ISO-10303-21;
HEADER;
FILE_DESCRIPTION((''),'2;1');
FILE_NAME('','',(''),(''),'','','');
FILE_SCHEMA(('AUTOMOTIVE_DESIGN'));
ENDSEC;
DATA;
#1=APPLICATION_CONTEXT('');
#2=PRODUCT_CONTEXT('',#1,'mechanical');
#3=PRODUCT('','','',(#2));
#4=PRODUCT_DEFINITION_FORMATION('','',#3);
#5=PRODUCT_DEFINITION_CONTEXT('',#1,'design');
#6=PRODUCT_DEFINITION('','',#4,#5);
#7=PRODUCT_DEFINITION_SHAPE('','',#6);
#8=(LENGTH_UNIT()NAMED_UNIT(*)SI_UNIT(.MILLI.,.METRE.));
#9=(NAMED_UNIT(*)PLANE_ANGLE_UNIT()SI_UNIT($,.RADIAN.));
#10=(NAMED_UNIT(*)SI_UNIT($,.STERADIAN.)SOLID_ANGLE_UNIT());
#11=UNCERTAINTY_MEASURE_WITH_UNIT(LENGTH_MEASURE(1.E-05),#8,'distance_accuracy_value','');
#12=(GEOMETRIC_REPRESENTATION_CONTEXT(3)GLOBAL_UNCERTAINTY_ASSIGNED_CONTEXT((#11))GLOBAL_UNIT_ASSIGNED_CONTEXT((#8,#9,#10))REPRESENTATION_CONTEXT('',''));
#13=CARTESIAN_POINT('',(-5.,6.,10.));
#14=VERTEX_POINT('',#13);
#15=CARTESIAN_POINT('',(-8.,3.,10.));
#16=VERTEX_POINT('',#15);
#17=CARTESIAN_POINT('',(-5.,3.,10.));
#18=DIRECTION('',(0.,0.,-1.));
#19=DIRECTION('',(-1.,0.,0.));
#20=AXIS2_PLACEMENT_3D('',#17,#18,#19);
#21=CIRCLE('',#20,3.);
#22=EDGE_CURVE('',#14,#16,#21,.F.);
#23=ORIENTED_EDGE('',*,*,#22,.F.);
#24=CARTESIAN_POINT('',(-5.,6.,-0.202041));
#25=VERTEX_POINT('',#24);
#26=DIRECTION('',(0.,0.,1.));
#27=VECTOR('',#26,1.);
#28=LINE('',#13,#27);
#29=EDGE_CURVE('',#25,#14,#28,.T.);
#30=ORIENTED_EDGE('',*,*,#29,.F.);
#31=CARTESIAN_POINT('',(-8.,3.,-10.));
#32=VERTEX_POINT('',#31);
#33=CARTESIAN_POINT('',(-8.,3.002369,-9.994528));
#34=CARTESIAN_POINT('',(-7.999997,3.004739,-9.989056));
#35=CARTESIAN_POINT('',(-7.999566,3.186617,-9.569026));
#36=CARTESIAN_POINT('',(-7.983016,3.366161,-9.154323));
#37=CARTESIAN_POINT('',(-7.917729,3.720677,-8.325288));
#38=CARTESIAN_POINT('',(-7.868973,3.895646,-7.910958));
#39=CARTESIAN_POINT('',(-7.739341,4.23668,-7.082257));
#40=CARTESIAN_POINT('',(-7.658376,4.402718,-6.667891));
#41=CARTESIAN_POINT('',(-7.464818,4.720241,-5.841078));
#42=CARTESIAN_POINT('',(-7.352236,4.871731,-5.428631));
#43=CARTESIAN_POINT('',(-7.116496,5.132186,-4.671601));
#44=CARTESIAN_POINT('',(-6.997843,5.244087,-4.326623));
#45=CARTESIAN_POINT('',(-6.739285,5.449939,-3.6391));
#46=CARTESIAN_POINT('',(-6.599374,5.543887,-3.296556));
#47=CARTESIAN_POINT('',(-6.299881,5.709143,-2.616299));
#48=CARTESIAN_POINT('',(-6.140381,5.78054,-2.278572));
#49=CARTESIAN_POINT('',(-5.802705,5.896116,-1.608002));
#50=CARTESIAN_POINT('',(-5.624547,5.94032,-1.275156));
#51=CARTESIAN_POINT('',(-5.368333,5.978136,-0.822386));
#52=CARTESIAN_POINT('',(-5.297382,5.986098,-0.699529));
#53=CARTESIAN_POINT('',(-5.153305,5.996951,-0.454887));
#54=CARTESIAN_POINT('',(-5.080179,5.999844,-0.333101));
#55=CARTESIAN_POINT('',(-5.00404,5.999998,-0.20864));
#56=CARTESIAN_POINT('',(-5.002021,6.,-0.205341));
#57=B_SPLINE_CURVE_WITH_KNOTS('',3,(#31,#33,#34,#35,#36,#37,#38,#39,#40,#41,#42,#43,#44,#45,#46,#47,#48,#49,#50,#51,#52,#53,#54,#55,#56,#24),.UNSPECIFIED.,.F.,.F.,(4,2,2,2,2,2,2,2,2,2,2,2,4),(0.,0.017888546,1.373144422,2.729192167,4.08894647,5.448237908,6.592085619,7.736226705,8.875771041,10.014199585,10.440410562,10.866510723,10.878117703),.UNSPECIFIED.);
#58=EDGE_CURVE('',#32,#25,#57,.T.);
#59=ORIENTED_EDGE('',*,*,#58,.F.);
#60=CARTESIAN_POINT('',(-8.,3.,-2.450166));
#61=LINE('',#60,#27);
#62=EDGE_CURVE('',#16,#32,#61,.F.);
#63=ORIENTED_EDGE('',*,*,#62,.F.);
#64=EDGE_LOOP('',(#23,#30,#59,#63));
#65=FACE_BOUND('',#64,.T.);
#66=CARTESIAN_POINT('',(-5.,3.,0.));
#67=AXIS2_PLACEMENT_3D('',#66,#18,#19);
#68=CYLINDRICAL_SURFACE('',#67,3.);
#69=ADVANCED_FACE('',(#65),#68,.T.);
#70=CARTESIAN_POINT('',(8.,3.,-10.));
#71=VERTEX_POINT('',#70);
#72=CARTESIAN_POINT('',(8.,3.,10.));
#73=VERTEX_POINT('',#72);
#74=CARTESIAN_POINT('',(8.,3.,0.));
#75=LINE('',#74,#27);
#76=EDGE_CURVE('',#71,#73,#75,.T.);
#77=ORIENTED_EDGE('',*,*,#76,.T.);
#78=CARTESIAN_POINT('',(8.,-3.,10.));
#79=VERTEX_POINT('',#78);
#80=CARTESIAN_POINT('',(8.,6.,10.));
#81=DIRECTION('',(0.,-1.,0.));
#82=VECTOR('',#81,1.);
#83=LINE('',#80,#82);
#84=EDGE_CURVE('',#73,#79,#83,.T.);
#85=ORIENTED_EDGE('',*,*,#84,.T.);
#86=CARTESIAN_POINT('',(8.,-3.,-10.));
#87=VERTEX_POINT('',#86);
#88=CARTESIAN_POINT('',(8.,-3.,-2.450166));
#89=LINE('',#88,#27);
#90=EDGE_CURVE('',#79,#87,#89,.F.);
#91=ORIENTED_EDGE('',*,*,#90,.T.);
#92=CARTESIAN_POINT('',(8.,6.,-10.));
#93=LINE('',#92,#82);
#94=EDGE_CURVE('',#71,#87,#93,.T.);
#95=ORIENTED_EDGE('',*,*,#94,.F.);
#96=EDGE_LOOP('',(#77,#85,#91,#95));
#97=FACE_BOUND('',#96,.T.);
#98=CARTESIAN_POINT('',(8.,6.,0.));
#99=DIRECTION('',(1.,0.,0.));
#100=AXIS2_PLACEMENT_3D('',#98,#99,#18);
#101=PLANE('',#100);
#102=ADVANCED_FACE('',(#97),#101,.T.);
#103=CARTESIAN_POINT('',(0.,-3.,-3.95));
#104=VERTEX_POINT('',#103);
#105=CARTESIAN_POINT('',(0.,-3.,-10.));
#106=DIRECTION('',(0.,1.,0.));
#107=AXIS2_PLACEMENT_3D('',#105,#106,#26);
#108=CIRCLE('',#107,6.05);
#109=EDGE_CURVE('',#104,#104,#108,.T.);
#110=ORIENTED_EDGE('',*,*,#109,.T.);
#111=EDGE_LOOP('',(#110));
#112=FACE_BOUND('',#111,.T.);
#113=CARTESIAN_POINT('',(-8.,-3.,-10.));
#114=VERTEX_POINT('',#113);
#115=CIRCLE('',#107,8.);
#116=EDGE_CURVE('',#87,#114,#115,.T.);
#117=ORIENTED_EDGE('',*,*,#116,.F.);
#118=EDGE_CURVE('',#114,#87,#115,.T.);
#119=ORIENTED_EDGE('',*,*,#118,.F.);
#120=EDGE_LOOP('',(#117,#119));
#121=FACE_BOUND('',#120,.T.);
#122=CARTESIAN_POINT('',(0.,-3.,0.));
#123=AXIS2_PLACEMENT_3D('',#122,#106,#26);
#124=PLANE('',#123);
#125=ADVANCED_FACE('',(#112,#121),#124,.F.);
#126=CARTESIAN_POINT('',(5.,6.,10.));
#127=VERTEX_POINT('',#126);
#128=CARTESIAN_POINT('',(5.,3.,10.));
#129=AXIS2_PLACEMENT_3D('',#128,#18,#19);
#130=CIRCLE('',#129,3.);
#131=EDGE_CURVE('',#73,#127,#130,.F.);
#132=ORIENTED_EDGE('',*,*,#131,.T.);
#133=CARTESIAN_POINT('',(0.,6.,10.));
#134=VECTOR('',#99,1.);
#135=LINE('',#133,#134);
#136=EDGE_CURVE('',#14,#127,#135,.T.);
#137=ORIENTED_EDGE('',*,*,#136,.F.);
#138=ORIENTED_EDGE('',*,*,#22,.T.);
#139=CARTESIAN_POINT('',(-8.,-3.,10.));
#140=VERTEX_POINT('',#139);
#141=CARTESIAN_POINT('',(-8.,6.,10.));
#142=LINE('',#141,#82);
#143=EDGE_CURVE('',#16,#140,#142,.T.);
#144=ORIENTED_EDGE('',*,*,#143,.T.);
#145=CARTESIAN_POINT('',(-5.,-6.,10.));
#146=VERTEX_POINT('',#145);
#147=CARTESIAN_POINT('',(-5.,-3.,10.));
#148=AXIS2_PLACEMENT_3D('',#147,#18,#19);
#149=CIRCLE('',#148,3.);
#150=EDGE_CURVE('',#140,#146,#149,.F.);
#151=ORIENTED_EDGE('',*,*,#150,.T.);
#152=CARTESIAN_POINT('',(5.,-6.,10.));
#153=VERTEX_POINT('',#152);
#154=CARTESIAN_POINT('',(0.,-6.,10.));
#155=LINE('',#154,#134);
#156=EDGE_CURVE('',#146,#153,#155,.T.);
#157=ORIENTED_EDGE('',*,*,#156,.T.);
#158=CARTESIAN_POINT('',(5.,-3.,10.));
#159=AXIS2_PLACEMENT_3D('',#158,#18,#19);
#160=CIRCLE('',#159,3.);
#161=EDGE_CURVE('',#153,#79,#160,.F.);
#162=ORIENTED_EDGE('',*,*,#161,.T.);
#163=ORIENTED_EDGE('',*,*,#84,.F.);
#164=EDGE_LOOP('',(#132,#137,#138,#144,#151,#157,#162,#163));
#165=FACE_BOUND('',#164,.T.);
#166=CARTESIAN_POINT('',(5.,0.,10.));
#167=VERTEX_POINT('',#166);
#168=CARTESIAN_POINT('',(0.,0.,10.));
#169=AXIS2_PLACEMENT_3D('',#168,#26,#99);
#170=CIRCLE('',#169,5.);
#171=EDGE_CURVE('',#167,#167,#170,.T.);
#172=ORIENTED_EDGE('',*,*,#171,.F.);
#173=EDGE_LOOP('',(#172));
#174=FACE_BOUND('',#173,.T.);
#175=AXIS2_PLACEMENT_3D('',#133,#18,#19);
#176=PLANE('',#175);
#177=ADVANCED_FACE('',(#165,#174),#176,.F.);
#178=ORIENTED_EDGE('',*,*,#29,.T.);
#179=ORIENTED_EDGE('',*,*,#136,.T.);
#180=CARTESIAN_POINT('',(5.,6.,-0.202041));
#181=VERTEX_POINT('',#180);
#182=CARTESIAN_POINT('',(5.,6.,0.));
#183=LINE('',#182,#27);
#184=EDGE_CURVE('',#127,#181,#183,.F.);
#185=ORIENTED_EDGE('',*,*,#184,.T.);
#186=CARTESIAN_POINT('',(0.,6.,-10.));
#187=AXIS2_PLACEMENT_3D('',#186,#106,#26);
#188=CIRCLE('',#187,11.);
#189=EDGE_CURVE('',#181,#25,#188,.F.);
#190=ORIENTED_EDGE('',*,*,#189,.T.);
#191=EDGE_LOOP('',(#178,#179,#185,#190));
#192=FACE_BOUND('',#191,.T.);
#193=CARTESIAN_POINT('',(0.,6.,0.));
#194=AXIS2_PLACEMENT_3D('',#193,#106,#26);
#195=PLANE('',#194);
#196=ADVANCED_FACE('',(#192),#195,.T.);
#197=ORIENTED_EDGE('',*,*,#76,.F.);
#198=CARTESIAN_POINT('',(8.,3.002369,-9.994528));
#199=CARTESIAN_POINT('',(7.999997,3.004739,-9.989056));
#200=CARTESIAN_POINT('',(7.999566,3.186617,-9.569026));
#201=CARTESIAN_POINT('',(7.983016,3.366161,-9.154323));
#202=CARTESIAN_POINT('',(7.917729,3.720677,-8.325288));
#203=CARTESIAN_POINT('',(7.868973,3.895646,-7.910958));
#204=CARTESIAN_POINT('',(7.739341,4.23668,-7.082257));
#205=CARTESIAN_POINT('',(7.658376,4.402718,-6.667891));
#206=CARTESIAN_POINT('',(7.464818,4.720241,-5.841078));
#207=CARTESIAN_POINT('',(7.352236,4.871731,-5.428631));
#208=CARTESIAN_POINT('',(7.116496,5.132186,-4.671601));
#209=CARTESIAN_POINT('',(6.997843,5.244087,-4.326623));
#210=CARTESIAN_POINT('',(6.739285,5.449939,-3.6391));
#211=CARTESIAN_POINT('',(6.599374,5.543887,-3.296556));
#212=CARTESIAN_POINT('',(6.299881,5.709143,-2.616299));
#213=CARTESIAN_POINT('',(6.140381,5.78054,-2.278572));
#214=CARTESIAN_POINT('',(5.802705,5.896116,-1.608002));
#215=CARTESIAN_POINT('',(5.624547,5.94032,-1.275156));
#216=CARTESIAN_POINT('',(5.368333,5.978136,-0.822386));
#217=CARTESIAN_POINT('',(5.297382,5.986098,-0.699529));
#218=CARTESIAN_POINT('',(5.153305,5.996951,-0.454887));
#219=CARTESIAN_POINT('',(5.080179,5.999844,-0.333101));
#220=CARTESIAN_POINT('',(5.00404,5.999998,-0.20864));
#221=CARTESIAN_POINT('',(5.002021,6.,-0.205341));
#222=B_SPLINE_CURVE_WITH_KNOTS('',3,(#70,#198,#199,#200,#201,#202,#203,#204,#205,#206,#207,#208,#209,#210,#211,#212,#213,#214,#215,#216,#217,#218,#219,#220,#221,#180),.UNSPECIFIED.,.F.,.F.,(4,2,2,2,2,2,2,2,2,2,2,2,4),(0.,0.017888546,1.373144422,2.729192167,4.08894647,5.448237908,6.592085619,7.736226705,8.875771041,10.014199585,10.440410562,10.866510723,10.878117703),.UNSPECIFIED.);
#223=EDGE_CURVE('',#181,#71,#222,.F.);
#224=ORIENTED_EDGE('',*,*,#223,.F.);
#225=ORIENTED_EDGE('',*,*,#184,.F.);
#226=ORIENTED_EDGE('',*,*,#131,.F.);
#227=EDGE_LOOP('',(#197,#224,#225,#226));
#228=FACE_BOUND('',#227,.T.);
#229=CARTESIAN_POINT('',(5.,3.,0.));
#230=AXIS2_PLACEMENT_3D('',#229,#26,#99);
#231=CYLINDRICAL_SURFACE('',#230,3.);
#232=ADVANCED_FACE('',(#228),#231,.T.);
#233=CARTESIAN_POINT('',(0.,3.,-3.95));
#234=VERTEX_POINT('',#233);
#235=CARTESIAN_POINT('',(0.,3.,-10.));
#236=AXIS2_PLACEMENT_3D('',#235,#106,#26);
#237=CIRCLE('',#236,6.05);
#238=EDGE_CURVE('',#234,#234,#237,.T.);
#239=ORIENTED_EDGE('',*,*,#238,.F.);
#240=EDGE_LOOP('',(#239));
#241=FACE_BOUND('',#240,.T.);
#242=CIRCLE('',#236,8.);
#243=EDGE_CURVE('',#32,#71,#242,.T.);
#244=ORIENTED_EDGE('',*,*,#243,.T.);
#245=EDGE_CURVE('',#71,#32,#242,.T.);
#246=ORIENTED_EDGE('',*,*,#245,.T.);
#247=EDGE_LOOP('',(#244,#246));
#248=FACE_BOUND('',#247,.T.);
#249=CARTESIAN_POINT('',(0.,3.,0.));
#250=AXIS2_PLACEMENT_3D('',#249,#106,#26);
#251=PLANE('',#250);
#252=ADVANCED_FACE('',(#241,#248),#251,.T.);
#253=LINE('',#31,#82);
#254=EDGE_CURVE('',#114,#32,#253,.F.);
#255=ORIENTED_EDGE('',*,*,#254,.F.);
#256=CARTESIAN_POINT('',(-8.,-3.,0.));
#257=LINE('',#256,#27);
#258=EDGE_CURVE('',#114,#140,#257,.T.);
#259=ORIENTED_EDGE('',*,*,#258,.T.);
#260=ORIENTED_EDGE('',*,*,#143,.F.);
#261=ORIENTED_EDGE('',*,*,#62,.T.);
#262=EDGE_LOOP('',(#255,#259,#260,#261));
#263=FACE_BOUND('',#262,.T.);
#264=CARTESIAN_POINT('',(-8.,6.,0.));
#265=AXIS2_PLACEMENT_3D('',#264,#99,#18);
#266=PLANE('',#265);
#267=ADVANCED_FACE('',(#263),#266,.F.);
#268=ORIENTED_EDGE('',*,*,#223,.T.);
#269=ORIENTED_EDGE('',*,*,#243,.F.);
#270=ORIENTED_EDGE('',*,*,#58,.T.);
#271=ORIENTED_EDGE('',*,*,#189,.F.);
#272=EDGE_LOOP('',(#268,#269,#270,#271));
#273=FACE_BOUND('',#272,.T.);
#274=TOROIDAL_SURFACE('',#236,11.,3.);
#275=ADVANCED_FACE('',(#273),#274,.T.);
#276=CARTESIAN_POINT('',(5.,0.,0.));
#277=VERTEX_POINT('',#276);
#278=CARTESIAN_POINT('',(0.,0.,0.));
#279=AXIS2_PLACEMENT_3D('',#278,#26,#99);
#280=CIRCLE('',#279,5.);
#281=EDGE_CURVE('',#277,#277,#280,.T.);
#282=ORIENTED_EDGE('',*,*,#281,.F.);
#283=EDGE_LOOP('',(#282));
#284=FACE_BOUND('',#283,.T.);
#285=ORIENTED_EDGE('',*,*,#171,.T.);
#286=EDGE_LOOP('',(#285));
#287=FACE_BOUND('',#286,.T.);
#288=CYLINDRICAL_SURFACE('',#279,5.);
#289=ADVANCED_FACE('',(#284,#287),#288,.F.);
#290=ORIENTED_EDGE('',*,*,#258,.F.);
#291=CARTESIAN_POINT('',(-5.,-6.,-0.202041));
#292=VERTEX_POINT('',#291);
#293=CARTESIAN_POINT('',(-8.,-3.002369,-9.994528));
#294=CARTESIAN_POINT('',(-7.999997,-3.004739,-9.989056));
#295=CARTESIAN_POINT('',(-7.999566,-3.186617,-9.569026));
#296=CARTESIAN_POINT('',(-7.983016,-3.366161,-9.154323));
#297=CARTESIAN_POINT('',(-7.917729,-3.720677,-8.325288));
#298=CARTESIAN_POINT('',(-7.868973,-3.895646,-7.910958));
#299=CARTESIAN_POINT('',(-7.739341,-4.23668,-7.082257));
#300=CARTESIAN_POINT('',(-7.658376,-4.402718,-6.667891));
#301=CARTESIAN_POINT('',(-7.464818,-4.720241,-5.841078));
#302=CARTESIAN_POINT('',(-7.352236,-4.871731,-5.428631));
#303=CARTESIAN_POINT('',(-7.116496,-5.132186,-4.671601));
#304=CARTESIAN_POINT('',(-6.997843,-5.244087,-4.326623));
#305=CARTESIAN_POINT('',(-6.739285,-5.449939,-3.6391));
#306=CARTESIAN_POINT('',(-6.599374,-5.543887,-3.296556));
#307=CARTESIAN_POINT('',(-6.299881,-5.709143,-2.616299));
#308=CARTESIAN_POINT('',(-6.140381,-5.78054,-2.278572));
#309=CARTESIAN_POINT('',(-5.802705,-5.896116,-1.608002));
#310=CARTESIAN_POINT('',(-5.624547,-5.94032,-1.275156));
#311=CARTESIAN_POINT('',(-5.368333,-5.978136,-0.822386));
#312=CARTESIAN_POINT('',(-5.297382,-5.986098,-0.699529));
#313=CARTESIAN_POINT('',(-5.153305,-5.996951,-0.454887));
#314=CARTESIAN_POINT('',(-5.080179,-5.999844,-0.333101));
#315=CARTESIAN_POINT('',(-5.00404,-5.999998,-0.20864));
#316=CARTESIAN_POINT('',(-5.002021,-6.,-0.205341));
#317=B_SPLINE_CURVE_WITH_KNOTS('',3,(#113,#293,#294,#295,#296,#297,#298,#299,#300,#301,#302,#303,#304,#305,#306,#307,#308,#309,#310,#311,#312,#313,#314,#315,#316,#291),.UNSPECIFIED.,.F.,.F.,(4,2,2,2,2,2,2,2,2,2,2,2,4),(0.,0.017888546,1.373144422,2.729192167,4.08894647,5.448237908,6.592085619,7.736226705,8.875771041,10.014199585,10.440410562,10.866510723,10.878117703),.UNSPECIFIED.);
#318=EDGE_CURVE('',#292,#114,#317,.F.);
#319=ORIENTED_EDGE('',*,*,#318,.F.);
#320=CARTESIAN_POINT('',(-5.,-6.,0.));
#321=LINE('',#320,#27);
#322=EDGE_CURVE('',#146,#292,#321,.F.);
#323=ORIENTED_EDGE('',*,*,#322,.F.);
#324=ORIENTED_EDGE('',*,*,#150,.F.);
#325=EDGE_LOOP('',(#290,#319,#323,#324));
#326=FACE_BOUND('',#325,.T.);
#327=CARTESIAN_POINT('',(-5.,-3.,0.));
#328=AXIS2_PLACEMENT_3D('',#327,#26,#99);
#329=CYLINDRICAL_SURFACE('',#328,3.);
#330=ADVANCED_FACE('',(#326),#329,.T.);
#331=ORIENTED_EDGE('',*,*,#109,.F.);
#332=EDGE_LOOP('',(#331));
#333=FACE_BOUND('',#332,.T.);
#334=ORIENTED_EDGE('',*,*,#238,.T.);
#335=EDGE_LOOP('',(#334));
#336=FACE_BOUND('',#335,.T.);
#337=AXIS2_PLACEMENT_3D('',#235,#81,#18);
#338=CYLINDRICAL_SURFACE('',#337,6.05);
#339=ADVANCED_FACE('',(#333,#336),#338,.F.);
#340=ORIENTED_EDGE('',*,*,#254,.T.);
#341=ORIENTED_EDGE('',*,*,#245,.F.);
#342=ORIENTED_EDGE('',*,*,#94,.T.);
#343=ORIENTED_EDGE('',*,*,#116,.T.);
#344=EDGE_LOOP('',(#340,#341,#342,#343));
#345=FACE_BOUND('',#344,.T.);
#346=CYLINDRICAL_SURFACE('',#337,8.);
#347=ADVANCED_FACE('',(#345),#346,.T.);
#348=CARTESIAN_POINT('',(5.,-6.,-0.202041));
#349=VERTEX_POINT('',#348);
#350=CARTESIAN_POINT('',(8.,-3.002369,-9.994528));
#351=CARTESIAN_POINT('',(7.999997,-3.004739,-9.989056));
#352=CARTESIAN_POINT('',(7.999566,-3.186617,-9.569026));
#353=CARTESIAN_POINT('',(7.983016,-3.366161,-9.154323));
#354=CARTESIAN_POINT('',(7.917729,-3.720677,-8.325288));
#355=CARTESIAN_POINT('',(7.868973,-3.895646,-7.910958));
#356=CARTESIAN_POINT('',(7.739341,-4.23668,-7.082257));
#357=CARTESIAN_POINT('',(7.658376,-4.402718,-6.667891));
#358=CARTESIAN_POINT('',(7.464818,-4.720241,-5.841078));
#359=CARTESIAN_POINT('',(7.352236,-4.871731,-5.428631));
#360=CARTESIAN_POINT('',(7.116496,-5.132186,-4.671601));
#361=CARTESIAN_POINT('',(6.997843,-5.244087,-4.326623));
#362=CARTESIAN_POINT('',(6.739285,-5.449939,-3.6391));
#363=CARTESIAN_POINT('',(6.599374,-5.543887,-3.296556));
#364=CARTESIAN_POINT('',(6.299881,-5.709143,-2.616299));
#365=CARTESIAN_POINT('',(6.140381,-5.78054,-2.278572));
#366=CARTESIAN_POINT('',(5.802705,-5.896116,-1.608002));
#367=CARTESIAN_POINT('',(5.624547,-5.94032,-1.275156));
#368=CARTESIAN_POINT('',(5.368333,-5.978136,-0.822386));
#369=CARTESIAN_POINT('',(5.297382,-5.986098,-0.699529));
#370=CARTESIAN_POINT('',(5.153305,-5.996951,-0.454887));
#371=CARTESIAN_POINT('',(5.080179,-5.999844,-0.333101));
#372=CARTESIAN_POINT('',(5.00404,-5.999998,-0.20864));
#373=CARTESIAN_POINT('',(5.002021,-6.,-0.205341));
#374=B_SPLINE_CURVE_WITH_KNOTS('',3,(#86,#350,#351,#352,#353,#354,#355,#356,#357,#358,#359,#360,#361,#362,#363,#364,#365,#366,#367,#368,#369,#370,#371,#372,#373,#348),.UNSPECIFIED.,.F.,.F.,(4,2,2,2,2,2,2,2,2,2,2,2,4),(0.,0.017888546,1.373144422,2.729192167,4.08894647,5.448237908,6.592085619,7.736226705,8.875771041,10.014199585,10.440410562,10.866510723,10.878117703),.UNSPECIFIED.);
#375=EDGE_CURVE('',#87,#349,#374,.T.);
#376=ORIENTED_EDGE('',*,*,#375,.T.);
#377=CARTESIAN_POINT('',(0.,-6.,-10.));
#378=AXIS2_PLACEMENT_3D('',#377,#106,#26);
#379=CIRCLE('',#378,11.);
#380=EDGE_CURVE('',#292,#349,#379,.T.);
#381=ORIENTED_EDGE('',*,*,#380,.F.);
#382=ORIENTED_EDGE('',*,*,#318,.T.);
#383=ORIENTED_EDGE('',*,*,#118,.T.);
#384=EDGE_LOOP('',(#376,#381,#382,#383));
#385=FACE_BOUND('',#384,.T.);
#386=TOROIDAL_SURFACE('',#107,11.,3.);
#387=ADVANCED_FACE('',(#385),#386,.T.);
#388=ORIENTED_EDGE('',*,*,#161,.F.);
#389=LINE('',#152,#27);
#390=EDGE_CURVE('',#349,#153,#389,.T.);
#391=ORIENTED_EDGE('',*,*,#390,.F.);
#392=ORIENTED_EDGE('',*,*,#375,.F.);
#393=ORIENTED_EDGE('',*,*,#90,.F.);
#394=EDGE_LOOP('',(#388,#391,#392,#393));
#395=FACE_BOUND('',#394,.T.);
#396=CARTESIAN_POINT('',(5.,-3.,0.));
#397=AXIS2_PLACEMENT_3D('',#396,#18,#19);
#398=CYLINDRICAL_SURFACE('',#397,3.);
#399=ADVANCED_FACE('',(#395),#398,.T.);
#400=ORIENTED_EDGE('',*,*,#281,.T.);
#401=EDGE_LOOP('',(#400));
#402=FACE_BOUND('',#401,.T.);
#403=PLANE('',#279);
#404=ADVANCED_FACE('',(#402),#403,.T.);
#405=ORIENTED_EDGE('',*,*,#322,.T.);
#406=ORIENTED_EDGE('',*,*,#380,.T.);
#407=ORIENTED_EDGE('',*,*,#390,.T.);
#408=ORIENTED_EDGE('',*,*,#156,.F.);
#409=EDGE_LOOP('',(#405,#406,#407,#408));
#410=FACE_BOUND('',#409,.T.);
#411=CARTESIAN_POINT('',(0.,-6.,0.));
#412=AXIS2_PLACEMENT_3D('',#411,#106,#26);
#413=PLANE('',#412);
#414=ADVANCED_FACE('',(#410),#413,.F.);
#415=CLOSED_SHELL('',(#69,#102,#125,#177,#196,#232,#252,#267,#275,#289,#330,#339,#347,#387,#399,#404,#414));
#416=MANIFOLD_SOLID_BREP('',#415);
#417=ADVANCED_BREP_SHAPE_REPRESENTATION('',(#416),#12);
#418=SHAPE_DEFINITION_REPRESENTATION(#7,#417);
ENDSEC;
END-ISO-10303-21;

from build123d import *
from OCP.BRepAlgoAPI import BRepAlgoAPI_Cut
from OCP.TopTools import TopTools_ListOfShape

# Parameters (mm, degrees)
BOSS_EXTRUDE2_DEPTH = 6
SKETCH3_4_R         = 8.000000000000005
SKETCH3_4_R_2       = 6.050000000000002
BOSS_EXTRUDE3_DEPTH = 3
FILLET3_R           = 3
SKETCH7_R           = 5
CUT_EXTRUDE2_DEPTH  = 10
FILLET4_START       = -11
FILLET4_DEPTH       = 22


with BuildPart() as part:
    # Sketch3 → Boss-Extrude2 (new, symmetric)
    with BuildSketch(Plane(origin=(0, 0, 0), x_dir=(1, 0, 0), z_dir=(0, 1, 0))):
        with BuildLine():
            Line((8, -10), (8, 10))
            ThreePointArc((8.000000000000002, 10), (-4.43e-15, 1.9999999999999964), (-8.000000000000009, 10.000000000000004))
            Line((-8, 10), (-8, -10))
            Line((-8, -10), (8, -10))
        make_face()
    extrude(amount=BOSS_EXTRUDE2_DEPTH, both=True)

    # Sketch3<4> → Boss-Extrude3 (add, symmetric)
    with BuildSketch(Plane(origin=(0, 0, 0), x_dir=(1, 0, 0), z_dir=(0, 1, 0))):
        with Locations((-2.96e-15, 10.000000000000002)):
            Circle(SKETCH3_4_R)
        with Locations(Location((-2.96e-15, 10.000000000000002, 0), (0, 0, 270))):
            Circle(SKETCH3_4_R_2, mode=Mode.SUBTRACT)
    extrude(amount=BOSS_EXTRUDE3_DEPTH, both=True)

    # Fillet3
    fillet3_edges = [part.edges().sort_by_distance(p)[0] for p in [
        (-5.06e-15, -6, -1.9999999999999947),
        (-5.06e-15, 6, -1.9999999999999947),
    ]]
    fillet(fillet3_edges, radius=FILLET3_R - 0.0001)  # a hair under: the kernel refuses the full size

    # Sketch7 → Cut-Extrude2 (cut)
    with BuildSketch(Plane.XY.offset(10)):
        Circle(SKETCH7_R)
    extrude(amount=-CUT_EXTRUDE2_DEPTH, mode=Mode.SUBTRACT)


with BuildPart() as fillet4_tool:
    # Fillet4: read off the stored shape, not the designer's step
    # Fillet4 outline → Fillet4 (new body)
    with BuildSketch(Plane.XY.offset(FILLET4_START)):
        with BuildLine():
            Line((-8, 6), (-8, 3))
            ThreePointArc((-8, 3), (-7.121320344, 5.121320344), (-5, 6))
            Line((-5, 6), (-8, 6))
        make_face()
        with BuildLine():
            ThreePointArc((-5, -6), (-7.121320344, -5.121320344), (-8, -3))
            Line((-8, -3), (-8, -6))
            Line((-8, -6), (-5, -6))
        make_face()
        with BuildLine():
            Line((8, 6), (5, 6))
            ThreePointArc((5, 6), (7.121320344, 5.121320344), (8, 3))
            Line((8, 3), (8, 6))
        make_face()
        with BuildLine():
            ThreePointArc((8, -3), (7.121320344, -5.121320344), (5, -6))
            Line((5, -6), (8, -6))
            Line((8, -6), (8, -3))
        make_face()
    extrude(amount=FILLET4_DEPTH)


with BuildPart() as part_1:
    add(part.part)

    # Fillet4: cut by fillet4_tool, with a tolerance
    fillet4_stock = TopTools_ListOfShape()
    fillet4_stock.Append(part_1.part.wrapped)
    fillet4_tools = TopTools_ListOfShape()
    fillet4_tools.Append(fillet4_tool.part.wrapped)
    fillet4_cut = BRepAlgoAPI_Cut()
    fillet4_cut.SetArguments(fillet4_stock)
    fillet4_cut.SetTools(fillet4_tools)
    fillet4_cut.SetFuzzyValue(0.00001)
    fillet4_cut.Build()
    add(Compound.cast(fillet4_cut.Shape()).solids(), mode=Mode.REPLACE)


solid = part_1.part
